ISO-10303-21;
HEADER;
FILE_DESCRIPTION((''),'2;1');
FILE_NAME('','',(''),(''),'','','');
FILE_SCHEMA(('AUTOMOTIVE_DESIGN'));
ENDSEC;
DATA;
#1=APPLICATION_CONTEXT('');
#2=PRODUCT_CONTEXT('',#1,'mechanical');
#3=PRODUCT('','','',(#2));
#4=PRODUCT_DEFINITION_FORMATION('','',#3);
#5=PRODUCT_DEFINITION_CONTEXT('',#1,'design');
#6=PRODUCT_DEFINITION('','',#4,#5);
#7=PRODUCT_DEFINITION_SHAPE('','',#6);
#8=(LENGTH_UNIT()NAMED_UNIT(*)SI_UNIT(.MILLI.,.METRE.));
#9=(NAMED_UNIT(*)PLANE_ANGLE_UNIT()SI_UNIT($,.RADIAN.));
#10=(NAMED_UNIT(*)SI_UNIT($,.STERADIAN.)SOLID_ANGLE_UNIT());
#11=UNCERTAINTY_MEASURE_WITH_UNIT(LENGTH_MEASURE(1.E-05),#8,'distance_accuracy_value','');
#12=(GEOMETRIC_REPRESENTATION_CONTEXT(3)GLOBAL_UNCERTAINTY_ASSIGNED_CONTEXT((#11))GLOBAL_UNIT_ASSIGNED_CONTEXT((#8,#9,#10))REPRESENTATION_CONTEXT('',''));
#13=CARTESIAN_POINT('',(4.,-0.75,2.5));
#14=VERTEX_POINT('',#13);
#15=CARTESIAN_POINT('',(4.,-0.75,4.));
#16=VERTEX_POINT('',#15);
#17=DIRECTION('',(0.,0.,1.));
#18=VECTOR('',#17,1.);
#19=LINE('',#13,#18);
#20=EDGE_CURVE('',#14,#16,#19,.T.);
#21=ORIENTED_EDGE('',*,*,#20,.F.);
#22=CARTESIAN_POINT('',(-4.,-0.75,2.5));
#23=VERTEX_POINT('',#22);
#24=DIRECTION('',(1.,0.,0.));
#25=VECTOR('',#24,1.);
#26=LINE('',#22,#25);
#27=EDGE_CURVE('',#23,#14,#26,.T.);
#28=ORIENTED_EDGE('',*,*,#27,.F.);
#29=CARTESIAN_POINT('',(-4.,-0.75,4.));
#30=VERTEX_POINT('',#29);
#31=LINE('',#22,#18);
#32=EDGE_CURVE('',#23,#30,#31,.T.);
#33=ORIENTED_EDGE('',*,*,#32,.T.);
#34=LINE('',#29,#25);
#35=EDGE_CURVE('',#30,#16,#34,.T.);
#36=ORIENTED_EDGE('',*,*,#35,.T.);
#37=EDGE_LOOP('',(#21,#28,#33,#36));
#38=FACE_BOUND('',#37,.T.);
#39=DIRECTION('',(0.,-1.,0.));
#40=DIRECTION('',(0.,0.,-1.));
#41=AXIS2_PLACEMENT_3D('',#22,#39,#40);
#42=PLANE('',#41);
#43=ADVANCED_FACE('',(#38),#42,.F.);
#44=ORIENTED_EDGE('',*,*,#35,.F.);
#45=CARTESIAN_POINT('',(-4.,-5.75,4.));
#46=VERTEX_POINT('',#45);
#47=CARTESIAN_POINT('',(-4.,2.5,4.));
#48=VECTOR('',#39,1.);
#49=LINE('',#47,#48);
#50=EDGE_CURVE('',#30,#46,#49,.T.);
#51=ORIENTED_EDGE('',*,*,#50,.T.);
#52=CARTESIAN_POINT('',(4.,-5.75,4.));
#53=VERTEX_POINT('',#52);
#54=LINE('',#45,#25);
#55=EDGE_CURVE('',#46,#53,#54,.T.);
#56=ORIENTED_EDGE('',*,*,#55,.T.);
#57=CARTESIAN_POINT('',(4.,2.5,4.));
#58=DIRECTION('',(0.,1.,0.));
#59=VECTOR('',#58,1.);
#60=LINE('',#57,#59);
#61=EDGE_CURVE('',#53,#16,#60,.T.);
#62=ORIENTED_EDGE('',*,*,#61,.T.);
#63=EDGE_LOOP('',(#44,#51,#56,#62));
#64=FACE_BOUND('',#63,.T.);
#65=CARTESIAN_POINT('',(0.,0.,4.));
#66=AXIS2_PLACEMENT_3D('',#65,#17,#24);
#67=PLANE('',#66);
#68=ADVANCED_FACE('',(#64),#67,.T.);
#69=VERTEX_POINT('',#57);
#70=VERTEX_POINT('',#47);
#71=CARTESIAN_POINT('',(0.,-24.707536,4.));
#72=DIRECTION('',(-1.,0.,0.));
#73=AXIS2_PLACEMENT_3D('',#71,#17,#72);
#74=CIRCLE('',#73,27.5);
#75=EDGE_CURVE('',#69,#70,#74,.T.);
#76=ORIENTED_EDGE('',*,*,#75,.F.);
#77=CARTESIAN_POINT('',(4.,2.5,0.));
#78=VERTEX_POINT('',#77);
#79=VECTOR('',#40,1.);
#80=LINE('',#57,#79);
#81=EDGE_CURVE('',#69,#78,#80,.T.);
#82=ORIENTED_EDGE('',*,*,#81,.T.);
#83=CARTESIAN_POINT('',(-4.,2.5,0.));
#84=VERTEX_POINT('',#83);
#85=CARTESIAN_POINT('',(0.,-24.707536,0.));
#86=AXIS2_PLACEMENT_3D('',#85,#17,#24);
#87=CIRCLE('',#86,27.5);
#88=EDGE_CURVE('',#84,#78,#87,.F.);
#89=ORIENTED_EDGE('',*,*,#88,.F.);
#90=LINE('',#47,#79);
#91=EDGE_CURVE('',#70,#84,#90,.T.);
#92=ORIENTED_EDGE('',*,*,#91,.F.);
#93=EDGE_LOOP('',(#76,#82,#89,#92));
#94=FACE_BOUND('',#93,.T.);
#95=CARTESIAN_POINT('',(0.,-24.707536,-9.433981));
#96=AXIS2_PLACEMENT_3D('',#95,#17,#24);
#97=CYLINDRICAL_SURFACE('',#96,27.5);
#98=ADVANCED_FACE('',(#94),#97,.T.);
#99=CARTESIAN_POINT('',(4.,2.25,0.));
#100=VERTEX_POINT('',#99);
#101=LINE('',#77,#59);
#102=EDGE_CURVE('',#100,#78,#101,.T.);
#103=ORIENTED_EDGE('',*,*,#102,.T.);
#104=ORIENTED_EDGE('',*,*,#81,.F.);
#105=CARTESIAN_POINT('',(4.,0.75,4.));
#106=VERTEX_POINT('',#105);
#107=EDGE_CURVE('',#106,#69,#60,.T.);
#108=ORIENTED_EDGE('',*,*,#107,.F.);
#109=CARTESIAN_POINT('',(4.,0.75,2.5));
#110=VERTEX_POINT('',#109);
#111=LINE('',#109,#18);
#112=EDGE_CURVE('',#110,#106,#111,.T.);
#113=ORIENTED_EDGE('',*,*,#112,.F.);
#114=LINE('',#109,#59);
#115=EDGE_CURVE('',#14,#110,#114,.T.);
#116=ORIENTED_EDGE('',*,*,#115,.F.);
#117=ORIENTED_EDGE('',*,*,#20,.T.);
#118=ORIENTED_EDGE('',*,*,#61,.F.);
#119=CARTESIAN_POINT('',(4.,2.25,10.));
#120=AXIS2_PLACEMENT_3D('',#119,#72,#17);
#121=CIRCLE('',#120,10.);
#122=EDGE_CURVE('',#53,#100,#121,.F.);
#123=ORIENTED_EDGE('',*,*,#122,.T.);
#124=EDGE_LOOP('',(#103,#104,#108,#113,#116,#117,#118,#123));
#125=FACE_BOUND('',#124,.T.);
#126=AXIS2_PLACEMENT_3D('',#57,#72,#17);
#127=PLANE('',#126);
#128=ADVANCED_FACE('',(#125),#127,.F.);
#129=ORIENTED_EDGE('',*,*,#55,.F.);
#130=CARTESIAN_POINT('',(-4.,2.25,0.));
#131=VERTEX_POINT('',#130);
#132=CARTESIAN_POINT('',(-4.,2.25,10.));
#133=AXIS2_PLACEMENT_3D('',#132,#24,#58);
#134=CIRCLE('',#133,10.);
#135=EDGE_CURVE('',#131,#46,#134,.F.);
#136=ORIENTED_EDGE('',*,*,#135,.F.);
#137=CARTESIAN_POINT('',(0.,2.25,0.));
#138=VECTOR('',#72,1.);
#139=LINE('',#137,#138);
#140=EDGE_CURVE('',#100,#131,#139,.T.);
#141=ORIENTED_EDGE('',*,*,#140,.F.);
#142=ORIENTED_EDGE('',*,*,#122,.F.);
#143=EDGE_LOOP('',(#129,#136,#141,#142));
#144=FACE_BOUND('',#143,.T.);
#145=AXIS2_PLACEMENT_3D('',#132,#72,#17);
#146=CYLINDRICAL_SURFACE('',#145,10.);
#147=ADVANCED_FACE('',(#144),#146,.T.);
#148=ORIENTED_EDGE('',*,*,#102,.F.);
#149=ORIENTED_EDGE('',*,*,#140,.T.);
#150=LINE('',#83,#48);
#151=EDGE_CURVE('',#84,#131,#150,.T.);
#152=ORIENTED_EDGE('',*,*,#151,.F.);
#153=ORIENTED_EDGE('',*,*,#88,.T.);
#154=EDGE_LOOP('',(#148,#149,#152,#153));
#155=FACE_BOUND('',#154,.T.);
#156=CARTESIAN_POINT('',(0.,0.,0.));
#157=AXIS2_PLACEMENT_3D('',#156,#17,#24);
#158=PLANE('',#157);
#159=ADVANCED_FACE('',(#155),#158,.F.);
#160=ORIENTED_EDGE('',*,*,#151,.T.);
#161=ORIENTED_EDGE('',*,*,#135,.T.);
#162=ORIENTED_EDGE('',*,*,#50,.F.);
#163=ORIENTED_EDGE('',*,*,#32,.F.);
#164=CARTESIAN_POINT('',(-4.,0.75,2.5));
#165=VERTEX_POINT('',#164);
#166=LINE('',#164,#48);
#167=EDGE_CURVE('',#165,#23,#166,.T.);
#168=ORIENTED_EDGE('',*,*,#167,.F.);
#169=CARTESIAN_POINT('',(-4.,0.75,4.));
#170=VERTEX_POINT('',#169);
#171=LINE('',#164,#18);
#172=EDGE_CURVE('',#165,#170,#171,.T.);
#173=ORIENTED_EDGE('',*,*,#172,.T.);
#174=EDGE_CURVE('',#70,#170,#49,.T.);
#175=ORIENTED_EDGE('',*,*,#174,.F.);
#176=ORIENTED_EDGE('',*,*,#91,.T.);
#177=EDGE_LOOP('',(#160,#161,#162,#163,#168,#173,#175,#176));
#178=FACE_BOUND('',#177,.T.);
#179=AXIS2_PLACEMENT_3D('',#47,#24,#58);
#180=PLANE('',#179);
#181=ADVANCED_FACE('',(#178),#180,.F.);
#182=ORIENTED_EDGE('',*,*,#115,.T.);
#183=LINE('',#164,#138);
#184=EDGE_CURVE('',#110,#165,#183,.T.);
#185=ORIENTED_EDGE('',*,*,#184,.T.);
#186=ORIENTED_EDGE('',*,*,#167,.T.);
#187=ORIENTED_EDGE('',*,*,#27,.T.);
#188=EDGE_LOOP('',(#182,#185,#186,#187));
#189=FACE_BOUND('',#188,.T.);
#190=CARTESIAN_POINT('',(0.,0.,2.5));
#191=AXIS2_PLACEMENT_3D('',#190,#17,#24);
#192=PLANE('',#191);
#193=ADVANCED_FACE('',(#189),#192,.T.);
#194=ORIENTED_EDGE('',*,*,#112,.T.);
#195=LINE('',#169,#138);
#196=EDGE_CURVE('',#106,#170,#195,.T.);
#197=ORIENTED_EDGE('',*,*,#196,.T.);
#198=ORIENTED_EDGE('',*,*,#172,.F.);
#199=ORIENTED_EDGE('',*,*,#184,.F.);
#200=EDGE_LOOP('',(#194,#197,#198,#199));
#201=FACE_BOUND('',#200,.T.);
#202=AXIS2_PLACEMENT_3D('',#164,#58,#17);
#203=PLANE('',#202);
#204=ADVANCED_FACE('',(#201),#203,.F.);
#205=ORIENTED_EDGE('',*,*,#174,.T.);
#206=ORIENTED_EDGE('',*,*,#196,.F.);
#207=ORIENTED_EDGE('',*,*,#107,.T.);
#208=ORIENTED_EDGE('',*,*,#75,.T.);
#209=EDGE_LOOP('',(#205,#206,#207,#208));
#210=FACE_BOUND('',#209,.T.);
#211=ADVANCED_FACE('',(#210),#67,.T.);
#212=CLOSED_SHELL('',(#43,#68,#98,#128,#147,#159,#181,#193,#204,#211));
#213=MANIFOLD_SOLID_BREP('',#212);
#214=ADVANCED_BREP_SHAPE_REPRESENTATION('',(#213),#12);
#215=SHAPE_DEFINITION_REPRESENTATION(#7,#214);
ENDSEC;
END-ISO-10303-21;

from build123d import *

# Parameters (mm, degrees)
CROQUIS1_W              = 8
CROQUIS1_H              = 5
SALIENTE_EXTRUIR1_DEPTH = 4
CROQUIS2_W              = 8
CROQUIS2_H              = 1.5
CORTAR_EXTRUIR1_DEPTH   = 1.5
CROQUIS3_W              = 8
CROQUIS3_H              = 5
SALIENTE_EXTRUIR2_DEPTH = 4
REDONDEO1_R             = 10


with BuildPart() as part:
    # Croquis1 → Saliente-Extruir1 (new body)
    with BuildSketch(Plane.XY):
        Rectangle(CROQUIS1_W, CROQUIS1_H)
    extrude(amount=SALIENTE_EXTRUIR1_DEPTH)

    # Croquis2 → Cortar-Extruir1 (cut)
    with BuildSketch(Plane.XY.offset(4)):
        Rectangle(CROQUIS2_W, CROQUIS2_H)
    extrude(amount=-CORTAR_EXTRUIR1_DEPTH, mode=Mode.SUBTRACT)

    # Croquis3 → Saliente-Extruir2 (add)
    with BuildSketch(Plane.XY.offset(4)):
        with BuildLine():
            Line((-4, 2.5), (4, 2.5))
            ThreePointArc((4, 2.5), (0, 2.792464279), (-4, 2.5))
        make_face()
        with Locations((0, -3.25)):
            Rectangle(CROQUIS3_W, CROQUIS3_H)
    extrude(amount=-SALIENTE_EXTRUIR2_DEPTH)

    # Redondeo1
    # the kernel refuses this fillet: 10 mm, written as the material it takes off along each edge
    with BuildSketch(Plane(origin=(24, -5.75, 0), x_dir=(0, 0, 1), z_dir=(-1, 0, 0))) as redondeo1_piece_1:
        with BuildLine():
            CenterArc((10, 8), REDONDEO1_R, 180, 53.130102354)
            Line((0, 8), (-0.2, 8))
            Line((-0.2, 8), (-0.2, 0))
            Line((-0.2, 0), (0, -0.2))
            ThreePointArc((0, -0.2), (2, -0.2), (3.88, -0.16))
            Line((3.88, -0.16), (4, 0))
        make_face()
    extrude(amount=48, mode=Mode.SUBTRACT)


solid = part.part
